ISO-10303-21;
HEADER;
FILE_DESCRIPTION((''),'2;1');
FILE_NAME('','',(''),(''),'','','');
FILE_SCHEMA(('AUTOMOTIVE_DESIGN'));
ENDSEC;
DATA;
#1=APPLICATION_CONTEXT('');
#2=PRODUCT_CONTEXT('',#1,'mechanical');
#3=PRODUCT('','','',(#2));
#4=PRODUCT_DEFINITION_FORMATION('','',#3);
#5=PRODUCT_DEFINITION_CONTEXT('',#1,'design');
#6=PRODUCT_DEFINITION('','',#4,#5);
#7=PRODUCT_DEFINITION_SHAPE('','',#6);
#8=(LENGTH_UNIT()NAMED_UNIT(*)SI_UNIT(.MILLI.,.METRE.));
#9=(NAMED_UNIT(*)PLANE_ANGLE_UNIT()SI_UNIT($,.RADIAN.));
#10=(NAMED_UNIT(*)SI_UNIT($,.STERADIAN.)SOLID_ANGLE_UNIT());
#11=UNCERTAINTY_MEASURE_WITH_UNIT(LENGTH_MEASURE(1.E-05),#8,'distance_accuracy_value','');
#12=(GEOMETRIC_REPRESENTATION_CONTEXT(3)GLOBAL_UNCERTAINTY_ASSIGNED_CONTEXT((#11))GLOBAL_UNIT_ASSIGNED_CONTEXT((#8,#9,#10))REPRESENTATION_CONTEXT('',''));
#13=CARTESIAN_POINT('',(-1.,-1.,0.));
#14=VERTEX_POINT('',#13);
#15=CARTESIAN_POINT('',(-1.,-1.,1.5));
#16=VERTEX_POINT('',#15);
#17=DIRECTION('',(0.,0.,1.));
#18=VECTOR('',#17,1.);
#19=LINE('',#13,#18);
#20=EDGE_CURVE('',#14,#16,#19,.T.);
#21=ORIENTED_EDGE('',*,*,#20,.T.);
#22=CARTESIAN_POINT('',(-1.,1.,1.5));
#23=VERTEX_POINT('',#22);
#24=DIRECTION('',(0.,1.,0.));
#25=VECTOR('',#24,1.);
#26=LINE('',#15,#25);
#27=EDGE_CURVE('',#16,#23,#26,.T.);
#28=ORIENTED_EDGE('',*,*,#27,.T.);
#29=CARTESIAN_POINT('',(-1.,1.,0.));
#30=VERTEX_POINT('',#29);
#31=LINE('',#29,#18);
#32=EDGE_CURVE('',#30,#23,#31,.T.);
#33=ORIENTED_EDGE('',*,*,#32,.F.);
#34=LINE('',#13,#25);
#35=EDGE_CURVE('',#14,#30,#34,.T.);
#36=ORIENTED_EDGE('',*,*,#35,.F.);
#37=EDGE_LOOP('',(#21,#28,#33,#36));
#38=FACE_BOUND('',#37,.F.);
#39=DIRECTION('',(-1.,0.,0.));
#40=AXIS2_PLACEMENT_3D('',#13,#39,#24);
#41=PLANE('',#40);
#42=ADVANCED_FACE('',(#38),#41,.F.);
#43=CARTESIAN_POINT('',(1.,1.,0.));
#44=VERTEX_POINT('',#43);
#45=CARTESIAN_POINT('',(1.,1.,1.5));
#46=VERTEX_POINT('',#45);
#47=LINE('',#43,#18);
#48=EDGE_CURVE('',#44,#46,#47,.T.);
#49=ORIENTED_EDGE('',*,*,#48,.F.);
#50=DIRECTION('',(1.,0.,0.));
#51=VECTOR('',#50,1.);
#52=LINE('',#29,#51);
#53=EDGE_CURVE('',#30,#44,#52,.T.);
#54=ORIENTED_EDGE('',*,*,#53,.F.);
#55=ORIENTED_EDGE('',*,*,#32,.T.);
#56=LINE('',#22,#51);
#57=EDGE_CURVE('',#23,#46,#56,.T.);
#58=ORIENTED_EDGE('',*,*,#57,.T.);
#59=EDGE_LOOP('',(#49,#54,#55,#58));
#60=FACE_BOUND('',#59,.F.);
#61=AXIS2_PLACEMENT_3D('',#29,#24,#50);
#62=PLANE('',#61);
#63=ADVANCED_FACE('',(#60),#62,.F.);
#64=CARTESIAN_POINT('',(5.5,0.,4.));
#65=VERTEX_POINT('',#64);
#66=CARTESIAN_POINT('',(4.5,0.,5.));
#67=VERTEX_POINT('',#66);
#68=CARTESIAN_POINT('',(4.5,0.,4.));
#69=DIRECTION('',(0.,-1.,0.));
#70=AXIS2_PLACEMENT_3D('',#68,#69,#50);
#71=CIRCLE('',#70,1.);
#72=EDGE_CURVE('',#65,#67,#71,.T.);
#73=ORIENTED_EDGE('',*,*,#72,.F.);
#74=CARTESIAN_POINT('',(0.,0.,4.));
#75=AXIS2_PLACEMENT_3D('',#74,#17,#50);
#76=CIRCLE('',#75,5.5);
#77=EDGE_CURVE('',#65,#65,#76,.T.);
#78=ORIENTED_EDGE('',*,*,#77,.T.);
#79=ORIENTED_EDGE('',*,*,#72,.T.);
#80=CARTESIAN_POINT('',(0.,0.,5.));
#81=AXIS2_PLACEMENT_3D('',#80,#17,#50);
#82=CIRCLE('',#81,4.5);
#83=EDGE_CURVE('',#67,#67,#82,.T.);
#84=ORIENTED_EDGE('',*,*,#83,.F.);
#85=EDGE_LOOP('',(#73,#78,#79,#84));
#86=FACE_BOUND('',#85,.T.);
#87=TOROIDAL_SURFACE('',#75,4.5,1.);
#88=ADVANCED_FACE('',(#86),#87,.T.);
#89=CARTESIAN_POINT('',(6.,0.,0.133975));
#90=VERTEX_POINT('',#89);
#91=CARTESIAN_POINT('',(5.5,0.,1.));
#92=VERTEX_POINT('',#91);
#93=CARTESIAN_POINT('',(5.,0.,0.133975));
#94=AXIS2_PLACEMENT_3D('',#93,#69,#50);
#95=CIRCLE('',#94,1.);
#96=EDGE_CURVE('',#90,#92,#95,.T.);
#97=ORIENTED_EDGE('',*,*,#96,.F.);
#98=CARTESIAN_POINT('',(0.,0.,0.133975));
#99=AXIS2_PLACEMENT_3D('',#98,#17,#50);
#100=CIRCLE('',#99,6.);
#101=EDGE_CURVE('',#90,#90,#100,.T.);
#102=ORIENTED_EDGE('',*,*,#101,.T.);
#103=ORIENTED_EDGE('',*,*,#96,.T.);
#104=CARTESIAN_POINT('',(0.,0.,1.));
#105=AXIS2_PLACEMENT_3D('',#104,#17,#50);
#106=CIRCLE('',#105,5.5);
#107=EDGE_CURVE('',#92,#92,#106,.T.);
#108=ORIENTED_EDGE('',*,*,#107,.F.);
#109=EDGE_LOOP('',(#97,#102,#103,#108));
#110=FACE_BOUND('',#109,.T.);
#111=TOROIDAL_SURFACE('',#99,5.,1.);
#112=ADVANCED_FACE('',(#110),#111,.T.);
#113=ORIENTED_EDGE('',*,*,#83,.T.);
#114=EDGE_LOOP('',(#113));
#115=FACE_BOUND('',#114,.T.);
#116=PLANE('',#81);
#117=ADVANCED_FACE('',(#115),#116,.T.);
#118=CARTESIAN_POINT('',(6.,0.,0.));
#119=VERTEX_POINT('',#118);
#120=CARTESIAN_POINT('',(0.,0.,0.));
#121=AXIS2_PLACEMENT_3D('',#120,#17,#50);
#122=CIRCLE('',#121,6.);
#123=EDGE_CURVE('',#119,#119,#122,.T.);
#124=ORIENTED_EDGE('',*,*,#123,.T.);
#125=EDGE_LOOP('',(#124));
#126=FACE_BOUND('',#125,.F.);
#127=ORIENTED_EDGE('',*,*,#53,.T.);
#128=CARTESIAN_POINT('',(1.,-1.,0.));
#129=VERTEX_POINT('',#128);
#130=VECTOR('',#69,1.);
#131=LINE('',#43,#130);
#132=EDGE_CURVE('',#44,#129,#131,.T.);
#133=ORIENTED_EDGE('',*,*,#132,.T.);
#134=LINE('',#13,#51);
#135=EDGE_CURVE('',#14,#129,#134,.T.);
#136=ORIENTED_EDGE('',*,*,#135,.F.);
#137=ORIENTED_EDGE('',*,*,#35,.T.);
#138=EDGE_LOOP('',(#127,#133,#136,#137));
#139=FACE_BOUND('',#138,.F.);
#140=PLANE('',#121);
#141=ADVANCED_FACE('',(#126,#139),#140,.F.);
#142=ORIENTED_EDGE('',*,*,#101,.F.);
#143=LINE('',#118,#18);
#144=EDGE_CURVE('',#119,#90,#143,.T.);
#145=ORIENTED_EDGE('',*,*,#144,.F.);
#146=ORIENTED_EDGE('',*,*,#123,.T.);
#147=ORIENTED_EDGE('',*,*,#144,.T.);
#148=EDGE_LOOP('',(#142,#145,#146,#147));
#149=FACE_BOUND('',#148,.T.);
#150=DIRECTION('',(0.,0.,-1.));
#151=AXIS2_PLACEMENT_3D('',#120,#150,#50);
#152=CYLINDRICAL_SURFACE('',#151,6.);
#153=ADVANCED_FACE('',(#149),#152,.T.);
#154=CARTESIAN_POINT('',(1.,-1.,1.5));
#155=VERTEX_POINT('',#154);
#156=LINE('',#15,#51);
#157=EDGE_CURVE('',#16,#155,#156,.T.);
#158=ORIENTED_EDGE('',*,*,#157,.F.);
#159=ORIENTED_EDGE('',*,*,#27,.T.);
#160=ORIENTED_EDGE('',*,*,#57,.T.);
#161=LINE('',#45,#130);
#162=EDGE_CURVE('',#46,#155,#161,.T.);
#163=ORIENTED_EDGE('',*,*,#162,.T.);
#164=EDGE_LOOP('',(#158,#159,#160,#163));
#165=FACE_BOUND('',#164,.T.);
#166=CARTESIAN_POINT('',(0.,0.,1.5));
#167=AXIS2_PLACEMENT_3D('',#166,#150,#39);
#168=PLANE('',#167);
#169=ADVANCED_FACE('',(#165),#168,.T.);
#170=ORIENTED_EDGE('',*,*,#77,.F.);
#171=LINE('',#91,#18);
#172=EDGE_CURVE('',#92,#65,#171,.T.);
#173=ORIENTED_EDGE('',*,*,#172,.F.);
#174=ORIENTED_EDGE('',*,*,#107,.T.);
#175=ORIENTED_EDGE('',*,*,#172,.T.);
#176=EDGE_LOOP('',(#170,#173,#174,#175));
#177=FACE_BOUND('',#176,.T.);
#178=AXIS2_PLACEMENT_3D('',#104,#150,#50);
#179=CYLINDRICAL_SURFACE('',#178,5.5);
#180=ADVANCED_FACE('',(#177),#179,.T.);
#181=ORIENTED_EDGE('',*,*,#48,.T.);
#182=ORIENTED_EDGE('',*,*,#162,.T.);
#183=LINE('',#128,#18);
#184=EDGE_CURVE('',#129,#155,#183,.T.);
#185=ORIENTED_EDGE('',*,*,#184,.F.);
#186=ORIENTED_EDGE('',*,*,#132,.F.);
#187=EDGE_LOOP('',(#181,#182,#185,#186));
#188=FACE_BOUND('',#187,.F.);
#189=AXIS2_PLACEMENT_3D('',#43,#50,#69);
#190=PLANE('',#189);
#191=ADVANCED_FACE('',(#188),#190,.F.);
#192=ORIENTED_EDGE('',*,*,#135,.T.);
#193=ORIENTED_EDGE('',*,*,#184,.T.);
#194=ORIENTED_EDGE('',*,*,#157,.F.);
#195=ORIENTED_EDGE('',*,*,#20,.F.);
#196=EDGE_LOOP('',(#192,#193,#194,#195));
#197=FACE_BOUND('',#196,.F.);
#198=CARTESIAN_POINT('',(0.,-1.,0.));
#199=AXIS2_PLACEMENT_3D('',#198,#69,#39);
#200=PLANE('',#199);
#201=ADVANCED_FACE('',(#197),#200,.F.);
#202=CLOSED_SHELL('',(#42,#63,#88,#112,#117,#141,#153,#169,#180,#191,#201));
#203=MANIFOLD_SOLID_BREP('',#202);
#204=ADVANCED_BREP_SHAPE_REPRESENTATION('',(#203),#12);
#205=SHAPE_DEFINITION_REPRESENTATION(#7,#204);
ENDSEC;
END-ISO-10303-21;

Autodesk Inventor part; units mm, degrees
ref_plane "YZ Plane" through (0, 0, 0) normal (1, 0, 0) x (0, 1, 0)
ref_plane "XZ Plane" through (0, 0, 0) normal (0, 1, 0) x (-1, 0, 0)
ref_plane "XY Plane" through (0, 0, 0) normal (0, 0, 1) x (1, 0, 0)
sketch "Sketch1" plane through (0, 0, 0) normal (0, 0, 1) x (1, 0, 0)
  circle A0 centre (0, 0) radius 6
  dimension "d0" = 12
extrude "Extrusion1" add sketch "Sketch1" along normal blind 1
sketch "Sketch2" plane through (0, 0, 1) normal (0, 0, 1) x (1, 0, 0)
  circle A0 centre (0, 0) radius 5.5
  dimension "d3" = 11
extrude "Extrusion2" add sketch "Sketch2" along normal blind 4
fillet "Fillet1" radius 1 1 edges at (-6, 0, 1)
fillet "Fillet2" radius 1 1 edges at (-5.5, 0, 5)
sketch "Sketch3" plane through (0, 0, 0) normal (0, 0, -1) x (-1, 0, 0)
  line L0 (0, -1) -> (1, -1)
  line L1 (1, -1) -> (1, 1)
  line L2 (1, 1) -> (-1, 1)
  line L3 (-1, 1) -> (-1, -1)
  line L4 (-1, -1) -> (0, -1)
  point P0 (0, 0)
  dimension "d8" = 1
  dimension "d9" = 2
  dimension "d10" = 1
  dimension "d13" = 1
extrude "Extrusion3" cut sketch "Sketch3" against normal blind 1.5
sketch "Sketch4" plane through (0, 0, 0) normal (0, 0, -1) x (-1, 0, 0)
  point P0 (0, 0)
properties part number "BTN_3"
